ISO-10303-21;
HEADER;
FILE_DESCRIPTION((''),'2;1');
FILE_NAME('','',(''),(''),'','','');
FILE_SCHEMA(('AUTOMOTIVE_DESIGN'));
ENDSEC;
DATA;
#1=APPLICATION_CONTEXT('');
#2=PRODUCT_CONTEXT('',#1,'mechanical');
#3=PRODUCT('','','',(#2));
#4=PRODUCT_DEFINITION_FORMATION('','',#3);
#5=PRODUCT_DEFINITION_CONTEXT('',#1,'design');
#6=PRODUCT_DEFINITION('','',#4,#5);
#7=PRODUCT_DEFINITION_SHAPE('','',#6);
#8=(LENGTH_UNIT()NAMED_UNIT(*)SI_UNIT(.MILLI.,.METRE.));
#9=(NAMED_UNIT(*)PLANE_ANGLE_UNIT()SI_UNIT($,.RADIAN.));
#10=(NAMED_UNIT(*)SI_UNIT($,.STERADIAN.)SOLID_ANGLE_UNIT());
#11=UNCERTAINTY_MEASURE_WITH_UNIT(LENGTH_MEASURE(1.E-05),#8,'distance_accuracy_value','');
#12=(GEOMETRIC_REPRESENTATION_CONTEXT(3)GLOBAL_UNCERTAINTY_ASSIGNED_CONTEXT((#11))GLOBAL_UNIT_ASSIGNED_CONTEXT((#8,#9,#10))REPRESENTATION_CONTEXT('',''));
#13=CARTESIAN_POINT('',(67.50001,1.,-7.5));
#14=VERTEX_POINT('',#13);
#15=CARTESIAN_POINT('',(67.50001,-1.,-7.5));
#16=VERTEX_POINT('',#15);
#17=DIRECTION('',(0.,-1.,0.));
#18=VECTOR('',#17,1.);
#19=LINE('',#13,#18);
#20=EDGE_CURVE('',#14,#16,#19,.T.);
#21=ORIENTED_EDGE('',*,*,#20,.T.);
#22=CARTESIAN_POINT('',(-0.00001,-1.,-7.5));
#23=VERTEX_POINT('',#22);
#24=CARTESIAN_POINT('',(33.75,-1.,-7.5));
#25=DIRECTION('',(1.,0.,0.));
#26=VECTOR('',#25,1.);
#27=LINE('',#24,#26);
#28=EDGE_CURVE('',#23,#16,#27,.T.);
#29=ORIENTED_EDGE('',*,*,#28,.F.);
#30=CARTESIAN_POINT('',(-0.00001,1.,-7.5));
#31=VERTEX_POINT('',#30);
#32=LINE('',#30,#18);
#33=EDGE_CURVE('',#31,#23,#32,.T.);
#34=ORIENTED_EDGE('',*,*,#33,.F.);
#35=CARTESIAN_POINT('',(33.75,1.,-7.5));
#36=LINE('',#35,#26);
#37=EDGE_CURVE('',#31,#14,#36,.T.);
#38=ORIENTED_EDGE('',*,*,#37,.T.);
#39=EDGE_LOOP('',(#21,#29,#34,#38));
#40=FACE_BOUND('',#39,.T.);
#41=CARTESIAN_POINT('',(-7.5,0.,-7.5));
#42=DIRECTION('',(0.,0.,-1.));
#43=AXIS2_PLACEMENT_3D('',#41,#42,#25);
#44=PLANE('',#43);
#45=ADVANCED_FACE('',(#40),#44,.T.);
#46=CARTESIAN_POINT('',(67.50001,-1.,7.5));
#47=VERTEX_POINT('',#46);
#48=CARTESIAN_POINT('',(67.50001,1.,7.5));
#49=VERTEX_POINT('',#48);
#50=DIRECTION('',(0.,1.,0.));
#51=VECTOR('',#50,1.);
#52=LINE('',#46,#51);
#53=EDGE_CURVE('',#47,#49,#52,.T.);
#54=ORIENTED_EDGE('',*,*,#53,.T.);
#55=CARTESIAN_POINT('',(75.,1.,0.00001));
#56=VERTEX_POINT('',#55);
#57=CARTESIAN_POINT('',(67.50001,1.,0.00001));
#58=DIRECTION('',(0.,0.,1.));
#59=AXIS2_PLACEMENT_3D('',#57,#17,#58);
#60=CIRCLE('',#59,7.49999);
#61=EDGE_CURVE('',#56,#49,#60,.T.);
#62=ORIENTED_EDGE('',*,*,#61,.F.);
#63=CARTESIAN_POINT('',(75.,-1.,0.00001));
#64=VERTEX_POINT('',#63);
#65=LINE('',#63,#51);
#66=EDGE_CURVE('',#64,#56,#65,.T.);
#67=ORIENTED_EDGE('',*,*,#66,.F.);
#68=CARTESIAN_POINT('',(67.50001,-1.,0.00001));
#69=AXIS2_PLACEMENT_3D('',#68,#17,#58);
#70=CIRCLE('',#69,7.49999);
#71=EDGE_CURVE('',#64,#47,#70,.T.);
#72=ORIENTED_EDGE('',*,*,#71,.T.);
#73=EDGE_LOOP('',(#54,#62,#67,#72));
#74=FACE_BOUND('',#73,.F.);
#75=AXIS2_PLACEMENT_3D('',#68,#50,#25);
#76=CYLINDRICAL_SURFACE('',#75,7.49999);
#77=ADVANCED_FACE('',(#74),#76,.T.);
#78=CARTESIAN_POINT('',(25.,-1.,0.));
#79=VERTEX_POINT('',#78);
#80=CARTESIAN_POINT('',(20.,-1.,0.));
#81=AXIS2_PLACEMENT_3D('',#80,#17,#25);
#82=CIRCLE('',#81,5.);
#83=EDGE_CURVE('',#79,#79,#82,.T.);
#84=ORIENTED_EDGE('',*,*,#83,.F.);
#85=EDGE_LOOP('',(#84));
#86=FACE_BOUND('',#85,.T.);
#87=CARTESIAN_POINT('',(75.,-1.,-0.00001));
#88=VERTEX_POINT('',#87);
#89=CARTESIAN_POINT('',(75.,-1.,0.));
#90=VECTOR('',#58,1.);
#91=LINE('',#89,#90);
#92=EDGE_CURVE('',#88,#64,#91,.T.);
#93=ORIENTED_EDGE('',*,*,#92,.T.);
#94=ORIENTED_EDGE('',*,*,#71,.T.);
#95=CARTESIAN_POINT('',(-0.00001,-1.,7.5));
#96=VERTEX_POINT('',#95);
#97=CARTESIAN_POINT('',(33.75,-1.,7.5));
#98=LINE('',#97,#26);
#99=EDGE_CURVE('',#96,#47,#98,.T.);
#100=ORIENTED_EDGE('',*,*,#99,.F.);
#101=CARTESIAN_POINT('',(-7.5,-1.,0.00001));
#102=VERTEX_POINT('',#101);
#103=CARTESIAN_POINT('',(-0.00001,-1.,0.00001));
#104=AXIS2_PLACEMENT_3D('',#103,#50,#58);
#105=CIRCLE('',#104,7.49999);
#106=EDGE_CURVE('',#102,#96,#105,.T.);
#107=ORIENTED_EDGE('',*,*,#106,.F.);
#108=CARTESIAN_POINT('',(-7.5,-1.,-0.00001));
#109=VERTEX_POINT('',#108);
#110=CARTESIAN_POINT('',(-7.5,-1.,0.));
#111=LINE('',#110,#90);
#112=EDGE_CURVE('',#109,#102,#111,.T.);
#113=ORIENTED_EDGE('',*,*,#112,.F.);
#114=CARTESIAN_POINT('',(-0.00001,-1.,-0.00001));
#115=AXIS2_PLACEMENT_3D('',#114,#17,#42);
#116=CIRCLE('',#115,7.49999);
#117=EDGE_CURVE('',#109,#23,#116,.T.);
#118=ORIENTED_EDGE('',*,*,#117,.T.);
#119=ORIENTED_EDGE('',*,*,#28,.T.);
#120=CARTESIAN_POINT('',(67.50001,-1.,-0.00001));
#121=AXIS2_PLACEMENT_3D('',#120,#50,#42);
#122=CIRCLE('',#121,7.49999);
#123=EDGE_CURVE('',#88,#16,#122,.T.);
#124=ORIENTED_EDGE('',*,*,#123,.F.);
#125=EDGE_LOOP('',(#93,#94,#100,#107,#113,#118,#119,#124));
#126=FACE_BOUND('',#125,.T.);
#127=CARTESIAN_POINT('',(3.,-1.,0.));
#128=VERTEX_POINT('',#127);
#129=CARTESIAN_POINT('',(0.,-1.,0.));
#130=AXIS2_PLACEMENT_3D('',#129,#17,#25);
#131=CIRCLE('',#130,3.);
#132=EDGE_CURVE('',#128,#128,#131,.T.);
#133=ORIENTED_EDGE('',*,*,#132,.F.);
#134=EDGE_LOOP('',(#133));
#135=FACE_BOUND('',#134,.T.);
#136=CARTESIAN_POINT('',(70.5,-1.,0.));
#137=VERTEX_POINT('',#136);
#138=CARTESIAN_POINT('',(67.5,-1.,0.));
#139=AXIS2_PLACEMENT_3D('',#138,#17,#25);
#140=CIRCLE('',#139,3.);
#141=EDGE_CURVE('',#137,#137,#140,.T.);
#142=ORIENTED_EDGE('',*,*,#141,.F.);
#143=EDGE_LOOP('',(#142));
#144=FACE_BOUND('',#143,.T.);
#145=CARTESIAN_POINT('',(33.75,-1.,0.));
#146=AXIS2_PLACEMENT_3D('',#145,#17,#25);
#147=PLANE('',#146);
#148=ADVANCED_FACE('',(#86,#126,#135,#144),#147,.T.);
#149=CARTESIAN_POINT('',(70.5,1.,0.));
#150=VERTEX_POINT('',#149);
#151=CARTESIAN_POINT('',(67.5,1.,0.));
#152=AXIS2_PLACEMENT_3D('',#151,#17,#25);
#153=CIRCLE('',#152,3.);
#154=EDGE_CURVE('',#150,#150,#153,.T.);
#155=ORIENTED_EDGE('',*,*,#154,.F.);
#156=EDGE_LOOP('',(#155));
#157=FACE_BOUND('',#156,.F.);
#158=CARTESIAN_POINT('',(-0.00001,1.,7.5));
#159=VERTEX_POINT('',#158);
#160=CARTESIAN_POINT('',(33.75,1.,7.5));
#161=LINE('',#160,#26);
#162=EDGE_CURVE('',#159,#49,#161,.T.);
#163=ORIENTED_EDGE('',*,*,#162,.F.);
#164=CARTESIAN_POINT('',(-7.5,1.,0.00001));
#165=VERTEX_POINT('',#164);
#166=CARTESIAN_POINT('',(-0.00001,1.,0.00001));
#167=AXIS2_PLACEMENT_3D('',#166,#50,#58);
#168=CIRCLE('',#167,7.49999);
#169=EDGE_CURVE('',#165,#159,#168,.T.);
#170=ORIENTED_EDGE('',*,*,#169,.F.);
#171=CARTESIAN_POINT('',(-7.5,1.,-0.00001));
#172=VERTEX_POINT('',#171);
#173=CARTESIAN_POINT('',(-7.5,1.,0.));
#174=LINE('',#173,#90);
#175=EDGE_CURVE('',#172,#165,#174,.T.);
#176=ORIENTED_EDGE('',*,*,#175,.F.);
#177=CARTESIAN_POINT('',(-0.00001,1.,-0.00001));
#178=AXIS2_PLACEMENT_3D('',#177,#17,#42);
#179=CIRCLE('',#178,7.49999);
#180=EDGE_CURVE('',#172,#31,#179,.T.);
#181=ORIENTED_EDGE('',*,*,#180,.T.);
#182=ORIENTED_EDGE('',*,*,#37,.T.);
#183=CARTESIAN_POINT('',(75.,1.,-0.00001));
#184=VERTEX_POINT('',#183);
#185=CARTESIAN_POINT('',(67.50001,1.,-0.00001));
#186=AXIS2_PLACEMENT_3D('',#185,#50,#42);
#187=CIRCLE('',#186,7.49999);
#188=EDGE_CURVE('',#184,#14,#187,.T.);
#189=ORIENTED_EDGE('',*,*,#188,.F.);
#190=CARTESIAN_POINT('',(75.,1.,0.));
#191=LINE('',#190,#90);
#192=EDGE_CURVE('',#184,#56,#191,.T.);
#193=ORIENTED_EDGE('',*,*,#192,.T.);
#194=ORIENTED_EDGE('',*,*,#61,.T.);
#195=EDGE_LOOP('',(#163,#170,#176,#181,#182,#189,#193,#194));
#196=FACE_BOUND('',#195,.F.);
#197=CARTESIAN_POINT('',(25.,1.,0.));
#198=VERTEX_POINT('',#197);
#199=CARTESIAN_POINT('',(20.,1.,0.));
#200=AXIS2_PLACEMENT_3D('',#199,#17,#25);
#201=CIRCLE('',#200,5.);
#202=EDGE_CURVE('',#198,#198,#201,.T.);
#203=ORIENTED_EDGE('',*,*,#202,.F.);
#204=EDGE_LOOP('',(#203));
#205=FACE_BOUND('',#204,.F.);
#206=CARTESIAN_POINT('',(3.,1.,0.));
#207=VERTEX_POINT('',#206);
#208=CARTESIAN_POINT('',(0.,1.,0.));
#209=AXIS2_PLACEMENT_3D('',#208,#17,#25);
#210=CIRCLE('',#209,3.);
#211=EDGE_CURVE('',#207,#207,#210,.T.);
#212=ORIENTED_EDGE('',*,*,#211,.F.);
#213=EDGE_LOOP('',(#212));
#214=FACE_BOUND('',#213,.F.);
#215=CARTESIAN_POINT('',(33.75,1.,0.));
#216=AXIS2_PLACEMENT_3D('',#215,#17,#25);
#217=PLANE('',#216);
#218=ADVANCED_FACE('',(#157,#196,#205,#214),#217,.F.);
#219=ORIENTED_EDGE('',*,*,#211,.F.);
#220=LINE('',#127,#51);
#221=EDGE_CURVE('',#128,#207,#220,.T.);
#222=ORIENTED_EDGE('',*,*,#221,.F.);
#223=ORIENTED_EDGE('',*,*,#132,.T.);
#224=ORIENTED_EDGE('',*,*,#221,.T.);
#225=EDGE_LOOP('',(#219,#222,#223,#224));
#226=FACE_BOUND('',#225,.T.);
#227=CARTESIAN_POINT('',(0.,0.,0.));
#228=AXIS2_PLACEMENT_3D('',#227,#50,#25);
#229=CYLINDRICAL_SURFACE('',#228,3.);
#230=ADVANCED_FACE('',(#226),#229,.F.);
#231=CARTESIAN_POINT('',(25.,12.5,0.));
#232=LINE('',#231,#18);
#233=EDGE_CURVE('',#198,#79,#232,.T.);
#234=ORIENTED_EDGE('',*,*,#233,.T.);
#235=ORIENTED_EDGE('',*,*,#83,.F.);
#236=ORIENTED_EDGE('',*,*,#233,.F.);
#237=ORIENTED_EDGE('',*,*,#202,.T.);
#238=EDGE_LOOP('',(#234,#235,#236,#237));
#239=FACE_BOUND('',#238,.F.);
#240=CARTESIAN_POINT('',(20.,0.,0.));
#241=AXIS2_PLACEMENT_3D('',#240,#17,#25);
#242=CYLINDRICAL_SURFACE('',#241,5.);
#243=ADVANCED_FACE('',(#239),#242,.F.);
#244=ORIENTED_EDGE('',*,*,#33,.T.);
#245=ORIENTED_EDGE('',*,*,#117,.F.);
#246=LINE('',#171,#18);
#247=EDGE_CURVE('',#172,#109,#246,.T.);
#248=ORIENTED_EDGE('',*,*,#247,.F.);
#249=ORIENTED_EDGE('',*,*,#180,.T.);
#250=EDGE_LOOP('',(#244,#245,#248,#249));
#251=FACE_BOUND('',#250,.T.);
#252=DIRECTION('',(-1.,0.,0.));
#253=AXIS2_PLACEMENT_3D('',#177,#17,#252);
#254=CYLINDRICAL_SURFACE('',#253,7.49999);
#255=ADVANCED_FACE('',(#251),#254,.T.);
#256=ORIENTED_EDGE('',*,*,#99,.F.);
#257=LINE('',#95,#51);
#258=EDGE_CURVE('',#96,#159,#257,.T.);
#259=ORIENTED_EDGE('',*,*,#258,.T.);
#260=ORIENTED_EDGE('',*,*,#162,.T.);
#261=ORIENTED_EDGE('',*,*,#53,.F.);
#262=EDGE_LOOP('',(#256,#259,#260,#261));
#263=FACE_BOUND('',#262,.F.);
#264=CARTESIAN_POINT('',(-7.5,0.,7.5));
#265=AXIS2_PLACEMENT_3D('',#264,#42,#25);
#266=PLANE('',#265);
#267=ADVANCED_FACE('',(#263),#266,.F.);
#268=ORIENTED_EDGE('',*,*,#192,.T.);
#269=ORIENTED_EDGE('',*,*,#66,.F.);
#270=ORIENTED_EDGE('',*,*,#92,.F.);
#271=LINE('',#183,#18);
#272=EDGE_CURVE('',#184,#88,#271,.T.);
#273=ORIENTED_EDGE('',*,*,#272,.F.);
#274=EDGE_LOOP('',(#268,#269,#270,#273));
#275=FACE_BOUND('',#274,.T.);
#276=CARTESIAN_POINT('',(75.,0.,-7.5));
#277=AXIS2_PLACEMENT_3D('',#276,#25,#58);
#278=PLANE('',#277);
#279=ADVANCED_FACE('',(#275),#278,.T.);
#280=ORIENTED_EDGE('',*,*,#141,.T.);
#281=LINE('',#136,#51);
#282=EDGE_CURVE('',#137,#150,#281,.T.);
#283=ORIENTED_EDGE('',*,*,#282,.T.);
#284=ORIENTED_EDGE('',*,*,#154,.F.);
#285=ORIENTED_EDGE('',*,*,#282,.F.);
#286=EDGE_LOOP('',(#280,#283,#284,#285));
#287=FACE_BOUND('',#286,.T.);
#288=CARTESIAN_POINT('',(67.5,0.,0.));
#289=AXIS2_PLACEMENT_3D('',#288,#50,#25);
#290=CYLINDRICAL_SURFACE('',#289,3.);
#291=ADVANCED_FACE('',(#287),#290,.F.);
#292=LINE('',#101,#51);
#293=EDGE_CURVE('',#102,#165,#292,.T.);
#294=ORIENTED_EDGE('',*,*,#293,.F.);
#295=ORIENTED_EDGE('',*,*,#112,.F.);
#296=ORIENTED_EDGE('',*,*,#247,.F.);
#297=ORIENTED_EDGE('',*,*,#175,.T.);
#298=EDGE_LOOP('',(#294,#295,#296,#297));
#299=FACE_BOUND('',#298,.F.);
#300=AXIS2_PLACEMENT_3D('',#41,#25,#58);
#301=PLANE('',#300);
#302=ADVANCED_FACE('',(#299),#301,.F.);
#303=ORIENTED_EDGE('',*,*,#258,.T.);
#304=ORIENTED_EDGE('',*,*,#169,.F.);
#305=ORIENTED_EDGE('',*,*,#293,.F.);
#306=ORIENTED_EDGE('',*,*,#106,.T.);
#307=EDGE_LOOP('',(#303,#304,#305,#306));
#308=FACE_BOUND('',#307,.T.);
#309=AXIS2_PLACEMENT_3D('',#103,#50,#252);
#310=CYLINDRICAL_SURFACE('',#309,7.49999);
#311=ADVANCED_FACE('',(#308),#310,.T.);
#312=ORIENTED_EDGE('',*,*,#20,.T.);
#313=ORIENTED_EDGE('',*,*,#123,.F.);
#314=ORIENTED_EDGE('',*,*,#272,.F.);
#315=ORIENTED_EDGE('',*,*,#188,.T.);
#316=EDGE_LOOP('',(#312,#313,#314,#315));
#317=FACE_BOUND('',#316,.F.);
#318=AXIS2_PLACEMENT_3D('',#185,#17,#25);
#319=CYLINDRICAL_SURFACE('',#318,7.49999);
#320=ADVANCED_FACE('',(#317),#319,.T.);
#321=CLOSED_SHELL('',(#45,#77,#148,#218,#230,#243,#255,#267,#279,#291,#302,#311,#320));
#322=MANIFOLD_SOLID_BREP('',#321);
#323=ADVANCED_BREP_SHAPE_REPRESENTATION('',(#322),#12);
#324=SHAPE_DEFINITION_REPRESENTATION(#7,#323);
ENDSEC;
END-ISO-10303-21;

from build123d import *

# Parameters (mm, degrees)
F0_W     = 82.5
F0_H     = 15
F0_R     = 3
F1_DEPTH = 1
F2_R     = 7.49999
F3_R     = 5
F4_DEPTH = 12.5


# Not quite as in the source:
# - a fillet or chamfer is up to 0.001 mm smaller than in the source, because OpenCascade refuses the exact size


with BuildPart() as f1:
    # F0 (on Front) → F1 (new body, symmetric)
    with BuildSketch(Plane.XZ):
        with Locations((33.75, 0)):
            Rectangle(F0_W, F0_H)
        Circle(F0_R, mode=Mode.SUBTRACT)
        with Locations((67.5, 0)):
            Circle(F0_R, mode=Mode.SUBTRACT)
    extrude(amount=F1_DEPTH, both=True)

    # F2 (radius 7.5 in the source; OpenCascade refuses exactly that, so slightly less here)
    f2_edges = [f1.edges().sort_by_distance(p)[0] for p in [
        (75, 0, 7.5),
        (75, 0, -7.5),
        (-7.5, 0, 7.5),
        (-7.5, 0, -7.5),
    ]]
    fillet(f2_edges, radius=F2_R)

    # F3 (on Front) → F4 (cut, symmetric)
    with BuildSketch(Plane.XZ):
        with Locations((20, 0)):
            Circle(F3_R)
    extrude(amount=F4_DEPTH, both=True, mode=Mode.SUBTRACT)


solid = f1.part
